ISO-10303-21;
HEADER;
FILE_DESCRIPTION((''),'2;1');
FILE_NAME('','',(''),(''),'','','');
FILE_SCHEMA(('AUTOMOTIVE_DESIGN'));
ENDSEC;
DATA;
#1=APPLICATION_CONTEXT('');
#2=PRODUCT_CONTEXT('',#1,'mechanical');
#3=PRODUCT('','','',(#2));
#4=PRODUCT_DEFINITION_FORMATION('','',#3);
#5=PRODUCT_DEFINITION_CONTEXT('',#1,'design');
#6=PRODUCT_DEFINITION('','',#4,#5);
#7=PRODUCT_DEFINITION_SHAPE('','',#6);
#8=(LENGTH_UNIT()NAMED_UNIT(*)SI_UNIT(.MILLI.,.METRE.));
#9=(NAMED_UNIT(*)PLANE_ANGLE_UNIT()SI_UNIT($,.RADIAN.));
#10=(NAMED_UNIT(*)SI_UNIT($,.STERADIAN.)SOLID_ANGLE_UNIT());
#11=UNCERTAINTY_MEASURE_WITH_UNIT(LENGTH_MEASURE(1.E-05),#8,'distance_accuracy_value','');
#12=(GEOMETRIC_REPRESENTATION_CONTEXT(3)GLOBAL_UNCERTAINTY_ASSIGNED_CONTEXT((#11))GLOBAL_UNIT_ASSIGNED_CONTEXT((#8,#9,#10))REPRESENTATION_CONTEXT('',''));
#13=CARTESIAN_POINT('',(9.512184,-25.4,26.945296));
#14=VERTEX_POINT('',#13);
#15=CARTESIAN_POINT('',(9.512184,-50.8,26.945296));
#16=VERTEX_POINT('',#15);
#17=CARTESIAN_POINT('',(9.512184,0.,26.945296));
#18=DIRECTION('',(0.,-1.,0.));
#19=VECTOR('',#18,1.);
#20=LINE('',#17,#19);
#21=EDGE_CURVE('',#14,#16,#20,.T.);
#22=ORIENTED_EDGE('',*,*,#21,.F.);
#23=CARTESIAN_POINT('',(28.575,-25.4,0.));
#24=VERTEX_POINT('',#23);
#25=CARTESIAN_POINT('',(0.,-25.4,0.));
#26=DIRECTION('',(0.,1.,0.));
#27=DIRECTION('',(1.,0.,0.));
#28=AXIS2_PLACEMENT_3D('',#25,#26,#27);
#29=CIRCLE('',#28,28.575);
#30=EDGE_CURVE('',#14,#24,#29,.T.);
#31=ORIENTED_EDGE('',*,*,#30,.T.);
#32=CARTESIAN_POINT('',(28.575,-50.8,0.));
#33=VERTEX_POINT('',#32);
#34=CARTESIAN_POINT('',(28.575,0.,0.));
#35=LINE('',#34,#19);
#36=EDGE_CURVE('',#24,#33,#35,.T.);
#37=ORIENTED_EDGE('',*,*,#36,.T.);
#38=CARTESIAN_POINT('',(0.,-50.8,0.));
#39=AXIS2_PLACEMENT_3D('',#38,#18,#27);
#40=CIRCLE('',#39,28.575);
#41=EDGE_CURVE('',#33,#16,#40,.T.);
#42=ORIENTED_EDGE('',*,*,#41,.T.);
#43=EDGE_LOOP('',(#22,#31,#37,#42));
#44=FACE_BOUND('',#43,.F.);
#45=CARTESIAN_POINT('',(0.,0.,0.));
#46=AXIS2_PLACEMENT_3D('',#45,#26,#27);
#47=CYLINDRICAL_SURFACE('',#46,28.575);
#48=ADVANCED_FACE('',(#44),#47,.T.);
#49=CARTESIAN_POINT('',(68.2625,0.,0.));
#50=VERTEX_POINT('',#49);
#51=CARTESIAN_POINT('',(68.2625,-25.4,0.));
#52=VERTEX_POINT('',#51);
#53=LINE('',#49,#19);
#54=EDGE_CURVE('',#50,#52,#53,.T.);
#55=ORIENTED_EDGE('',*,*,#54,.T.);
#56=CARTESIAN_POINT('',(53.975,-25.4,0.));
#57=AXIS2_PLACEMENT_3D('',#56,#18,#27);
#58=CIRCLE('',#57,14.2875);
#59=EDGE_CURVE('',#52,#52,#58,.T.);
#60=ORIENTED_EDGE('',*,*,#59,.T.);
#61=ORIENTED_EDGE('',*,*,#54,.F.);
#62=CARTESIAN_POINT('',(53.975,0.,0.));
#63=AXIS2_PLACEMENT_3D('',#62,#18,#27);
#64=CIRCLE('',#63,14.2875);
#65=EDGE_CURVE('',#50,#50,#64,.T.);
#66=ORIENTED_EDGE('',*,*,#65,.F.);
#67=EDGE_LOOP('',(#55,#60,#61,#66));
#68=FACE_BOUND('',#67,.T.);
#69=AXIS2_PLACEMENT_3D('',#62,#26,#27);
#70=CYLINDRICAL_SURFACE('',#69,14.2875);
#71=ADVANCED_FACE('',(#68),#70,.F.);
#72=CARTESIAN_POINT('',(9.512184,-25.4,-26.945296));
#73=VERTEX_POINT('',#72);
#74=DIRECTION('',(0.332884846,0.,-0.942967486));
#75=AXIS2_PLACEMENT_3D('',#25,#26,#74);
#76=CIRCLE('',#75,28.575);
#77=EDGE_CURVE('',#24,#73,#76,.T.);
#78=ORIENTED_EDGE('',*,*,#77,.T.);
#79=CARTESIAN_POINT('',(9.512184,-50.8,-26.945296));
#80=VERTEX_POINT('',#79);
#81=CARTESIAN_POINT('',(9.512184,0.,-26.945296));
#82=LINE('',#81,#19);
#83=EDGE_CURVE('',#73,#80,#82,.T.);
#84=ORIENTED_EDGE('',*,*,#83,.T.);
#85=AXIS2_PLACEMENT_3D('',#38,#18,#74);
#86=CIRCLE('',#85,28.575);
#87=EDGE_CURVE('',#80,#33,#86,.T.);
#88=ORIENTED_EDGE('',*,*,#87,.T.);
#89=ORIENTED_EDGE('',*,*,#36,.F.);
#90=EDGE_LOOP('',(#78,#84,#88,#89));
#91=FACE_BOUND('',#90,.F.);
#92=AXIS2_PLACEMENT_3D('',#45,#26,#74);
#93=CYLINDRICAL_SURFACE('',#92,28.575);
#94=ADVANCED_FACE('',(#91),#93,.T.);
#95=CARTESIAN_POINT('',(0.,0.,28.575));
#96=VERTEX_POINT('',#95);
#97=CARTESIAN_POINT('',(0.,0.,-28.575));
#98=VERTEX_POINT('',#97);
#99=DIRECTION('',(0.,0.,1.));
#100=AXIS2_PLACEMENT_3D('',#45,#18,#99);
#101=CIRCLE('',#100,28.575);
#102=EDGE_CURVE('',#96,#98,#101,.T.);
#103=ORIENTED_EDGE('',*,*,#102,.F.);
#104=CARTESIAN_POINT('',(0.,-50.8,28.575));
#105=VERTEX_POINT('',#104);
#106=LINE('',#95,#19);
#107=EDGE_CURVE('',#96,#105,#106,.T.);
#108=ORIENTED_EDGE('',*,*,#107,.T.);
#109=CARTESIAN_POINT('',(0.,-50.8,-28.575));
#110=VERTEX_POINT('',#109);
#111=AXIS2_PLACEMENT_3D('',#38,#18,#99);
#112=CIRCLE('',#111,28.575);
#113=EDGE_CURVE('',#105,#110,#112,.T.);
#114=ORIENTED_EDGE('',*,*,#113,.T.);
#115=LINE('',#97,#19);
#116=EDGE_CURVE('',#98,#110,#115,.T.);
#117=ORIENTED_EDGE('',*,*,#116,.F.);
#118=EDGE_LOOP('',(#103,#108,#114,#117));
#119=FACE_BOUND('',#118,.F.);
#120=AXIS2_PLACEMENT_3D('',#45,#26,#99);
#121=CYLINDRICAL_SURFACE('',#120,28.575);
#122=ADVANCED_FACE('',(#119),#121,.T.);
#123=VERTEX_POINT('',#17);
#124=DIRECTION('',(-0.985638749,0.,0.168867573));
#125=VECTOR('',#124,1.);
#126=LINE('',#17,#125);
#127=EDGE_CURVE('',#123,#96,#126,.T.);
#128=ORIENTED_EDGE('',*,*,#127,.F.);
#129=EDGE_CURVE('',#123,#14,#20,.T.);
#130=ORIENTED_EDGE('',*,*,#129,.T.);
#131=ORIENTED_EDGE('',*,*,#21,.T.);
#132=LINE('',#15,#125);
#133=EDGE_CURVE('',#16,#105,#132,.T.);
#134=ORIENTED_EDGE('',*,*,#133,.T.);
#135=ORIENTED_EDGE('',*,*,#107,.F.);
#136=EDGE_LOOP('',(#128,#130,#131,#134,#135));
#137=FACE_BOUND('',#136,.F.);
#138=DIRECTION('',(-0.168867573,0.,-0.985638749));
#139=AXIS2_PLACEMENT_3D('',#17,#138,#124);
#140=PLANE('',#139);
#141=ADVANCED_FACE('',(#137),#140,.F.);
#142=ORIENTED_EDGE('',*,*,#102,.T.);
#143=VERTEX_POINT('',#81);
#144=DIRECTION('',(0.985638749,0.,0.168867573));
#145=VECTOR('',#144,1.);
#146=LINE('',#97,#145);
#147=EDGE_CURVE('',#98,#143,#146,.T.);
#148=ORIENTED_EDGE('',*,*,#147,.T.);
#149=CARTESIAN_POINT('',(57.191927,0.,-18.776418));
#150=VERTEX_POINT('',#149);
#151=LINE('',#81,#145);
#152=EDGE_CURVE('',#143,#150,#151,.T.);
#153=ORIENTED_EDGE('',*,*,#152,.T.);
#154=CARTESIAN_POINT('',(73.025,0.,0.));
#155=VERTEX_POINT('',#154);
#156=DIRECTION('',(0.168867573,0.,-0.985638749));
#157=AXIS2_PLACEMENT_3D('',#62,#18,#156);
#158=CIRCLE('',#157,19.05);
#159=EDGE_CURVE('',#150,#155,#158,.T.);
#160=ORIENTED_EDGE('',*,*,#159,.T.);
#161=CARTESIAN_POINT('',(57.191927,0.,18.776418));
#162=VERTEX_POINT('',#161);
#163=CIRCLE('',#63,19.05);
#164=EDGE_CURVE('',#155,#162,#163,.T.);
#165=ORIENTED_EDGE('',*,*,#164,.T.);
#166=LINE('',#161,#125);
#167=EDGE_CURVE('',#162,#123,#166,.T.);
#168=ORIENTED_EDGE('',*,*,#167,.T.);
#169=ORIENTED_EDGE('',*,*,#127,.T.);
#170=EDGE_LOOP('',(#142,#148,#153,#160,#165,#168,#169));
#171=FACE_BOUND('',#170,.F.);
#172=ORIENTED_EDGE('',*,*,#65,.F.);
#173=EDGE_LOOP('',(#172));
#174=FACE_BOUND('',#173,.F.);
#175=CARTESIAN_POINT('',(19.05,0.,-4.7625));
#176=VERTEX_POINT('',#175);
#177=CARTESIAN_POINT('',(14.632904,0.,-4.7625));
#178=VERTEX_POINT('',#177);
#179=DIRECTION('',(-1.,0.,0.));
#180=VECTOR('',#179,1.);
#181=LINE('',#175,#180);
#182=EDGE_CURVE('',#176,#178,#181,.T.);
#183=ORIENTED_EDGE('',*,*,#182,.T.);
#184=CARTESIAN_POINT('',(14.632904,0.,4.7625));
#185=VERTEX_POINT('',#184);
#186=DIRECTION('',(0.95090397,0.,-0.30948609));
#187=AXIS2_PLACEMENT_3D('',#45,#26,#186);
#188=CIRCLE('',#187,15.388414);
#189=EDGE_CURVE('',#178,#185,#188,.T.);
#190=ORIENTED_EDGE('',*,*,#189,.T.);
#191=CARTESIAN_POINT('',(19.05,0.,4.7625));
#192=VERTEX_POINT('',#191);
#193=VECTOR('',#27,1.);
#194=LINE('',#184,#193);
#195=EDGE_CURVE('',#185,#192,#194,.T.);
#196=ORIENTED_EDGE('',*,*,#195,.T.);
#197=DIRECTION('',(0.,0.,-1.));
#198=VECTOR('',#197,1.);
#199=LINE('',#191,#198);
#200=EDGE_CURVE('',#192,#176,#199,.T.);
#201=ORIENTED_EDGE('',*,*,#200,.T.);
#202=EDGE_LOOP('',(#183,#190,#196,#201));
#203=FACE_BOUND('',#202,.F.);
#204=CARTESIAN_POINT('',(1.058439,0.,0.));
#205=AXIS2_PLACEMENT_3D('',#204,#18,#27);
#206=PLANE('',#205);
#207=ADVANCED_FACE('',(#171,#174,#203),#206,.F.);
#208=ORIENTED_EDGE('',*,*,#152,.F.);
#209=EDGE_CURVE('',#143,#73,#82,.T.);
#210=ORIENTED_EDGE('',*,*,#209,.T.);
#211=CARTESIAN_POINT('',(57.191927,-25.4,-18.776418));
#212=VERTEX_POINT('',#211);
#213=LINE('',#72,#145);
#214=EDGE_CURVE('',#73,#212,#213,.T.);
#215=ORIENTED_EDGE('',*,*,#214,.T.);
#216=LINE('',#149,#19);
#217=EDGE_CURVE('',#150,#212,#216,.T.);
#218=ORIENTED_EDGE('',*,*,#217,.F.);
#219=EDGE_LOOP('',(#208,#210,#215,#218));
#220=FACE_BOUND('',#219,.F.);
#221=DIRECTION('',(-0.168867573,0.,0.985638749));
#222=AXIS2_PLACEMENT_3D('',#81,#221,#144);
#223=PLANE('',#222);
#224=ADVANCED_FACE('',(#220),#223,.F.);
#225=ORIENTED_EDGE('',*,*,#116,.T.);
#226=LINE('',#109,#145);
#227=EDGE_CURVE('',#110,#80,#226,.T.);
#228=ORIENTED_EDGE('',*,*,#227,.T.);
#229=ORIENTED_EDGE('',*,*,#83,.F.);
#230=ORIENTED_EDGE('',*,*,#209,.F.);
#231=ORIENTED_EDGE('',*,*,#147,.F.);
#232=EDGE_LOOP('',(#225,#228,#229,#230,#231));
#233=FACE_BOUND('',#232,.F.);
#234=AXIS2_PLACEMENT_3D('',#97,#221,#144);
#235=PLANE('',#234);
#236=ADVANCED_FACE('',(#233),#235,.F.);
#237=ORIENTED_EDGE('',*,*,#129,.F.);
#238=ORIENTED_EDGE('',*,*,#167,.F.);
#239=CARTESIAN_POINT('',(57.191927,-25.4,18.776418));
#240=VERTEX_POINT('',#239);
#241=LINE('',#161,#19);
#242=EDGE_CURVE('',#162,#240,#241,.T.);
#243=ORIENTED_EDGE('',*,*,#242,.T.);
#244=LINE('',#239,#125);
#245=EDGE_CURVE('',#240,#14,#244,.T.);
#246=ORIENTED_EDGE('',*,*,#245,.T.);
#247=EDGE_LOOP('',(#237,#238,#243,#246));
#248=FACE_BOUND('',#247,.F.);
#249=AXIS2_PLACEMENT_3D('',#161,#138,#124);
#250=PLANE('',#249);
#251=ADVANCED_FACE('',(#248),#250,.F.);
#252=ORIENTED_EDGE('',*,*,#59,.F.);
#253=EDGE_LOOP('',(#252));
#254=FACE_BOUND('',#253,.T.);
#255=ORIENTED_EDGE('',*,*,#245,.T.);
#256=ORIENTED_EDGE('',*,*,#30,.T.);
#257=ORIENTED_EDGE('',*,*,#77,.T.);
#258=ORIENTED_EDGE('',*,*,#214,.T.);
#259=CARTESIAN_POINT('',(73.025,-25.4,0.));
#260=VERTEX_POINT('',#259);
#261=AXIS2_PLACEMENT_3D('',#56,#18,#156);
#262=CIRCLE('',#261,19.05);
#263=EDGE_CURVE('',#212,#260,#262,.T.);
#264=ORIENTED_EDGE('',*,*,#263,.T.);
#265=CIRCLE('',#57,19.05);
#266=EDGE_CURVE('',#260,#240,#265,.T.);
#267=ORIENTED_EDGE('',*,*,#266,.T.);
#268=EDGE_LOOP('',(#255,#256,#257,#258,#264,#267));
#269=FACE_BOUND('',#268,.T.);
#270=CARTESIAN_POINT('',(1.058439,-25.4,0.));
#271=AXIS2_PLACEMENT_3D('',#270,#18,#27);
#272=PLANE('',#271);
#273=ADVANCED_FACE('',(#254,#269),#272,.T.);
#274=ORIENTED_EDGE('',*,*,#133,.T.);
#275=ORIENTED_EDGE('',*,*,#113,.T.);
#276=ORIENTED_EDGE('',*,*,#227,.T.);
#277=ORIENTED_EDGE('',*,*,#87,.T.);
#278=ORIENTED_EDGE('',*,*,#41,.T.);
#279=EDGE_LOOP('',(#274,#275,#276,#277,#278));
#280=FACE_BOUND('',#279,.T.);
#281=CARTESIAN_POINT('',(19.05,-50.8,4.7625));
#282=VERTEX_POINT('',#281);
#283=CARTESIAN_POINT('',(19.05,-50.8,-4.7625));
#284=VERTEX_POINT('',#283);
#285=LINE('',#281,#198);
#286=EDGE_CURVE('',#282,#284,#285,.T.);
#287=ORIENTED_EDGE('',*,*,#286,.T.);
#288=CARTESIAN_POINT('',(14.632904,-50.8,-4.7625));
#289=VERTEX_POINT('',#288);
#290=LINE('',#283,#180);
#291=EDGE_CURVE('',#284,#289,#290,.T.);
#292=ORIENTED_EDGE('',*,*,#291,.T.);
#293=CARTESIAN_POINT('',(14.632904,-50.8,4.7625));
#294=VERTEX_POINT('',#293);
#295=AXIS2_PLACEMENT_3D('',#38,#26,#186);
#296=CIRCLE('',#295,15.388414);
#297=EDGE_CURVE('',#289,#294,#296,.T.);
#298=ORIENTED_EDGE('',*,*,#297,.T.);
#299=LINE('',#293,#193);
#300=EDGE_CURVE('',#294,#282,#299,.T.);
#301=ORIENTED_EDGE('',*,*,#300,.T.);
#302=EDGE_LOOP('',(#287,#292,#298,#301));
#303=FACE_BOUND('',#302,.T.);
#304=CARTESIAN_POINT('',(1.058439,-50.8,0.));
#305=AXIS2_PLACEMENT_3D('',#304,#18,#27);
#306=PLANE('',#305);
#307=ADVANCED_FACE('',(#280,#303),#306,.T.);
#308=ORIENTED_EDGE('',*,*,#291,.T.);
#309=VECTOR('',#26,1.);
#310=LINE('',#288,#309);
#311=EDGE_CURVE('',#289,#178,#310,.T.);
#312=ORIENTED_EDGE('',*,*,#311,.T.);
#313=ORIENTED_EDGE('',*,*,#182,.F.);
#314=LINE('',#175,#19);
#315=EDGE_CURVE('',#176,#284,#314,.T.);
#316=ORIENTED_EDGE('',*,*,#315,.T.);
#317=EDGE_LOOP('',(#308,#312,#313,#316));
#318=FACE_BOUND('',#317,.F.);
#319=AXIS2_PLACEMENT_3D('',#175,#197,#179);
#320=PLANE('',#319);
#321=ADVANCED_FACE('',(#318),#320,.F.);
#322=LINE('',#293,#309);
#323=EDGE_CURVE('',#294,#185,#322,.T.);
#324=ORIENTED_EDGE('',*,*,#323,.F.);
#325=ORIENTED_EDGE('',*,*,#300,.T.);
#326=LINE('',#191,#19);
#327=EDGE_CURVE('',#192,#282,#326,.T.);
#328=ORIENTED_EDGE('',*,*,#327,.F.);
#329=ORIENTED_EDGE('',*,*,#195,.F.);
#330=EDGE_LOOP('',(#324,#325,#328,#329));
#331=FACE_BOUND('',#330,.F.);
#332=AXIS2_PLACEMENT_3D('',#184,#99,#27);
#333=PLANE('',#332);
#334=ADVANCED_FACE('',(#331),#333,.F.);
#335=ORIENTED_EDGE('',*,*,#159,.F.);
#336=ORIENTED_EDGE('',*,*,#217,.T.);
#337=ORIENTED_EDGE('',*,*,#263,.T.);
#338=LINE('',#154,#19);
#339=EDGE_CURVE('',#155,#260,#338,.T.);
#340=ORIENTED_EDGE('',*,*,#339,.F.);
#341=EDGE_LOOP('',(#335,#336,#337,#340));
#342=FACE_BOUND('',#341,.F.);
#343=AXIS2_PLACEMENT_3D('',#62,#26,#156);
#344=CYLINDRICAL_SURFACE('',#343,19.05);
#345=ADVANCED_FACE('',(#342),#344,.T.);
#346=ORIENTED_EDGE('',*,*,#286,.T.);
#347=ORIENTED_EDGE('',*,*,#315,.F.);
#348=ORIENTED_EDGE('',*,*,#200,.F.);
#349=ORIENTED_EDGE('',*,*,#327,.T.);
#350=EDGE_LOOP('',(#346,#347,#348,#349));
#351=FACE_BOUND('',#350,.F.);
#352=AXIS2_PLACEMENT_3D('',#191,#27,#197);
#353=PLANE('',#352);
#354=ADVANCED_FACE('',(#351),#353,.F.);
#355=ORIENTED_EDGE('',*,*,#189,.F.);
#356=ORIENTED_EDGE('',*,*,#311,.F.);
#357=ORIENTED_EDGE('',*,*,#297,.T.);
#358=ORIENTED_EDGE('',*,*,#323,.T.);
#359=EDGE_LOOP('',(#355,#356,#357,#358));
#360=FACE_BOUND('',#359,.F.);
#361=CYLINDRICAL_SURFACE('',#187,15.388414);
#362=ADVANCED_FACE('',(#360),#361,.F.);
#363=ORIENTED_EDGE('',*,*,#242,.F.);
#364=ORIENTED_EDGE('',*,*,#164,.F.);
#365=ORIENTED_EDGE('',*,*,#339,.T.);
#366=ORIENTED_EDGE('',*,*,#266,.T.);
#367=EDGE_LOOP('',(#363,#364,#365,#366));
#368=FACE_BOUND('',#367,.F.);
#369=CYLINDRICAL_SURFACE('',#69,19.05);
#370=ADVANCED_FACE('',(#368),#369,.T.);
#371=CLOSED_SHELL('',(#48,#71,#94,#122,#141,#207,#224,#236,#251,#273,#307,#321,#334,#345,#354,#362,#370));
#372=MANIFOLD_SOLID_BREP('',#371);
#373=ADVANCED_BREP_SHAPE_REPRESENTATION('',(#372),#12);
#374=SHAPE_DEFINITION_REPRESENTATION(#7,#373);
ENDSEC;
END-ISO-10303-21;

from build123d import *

# Parameters (mm, degrees)
F0_R     = 14.2875
F1_DEPTH = 25.4
F2_DEPTH = 50.8


with BuildPart() as f1:
    # F0 (on Front) → F1 (new body)
    with BuildSketch(Plane.XZ):
        with BuildLine():
            Line((9.5121844836, 26.9452959039), (0, 28.575))
            ThreePointArc((0, 28.575), (-28.575, 0), (0, -28.575))
            Line((0, -28.575), (9.5121844836, -26.9452959039))
            ThreePointArc((9.5121844836, -26.9452959039), (23.3274655355, -16.5033322905), (28.575, 0))
            ThreePointArc((28.575, 0), (23.3274655355, 16.5033322905), (9.5121844836, 26.9452959039))
        make_face()
        with BuildLine():
            ThreePointArc((-14.6329037383, 4.7625), (0, 15.3884137605), (14.6329037383, 4.7625))
            Line((14.6329037383, 4.7625), (19.05, 4.7625))
            Line((19.05, 4.7625), (19.05, -4.7625))
            Line((19.05, -4.7625), (14.6329037383, -4.7625))
            ThreePointArc((14.6329037383, -4.7625), (0, -15.3884137605), (-14.6329037383, -4.7625))
            Line((-14.6329037383, -4.7625), (-19.05, -4.7625))
            Line((-19.05, -4.7625), (-19.05, 4.7625))
            Line((-19.05, 4.7625), (-14.6329037383, 4.7625))
        make_face(mode=Mode.SUBTRACT)
        with BuildLine():
            Line((57.1919272622, 18.7764181619), (9.5121844836, 26.9452959039))
            ThreePointArc((9.5121844836, 26.9452959039), (23.3274655355, 16.5033322905), (28.575, 0))
            ThreePointArc((28.575, 0), (23.3274655355, -16.5033322905), (9.5121844836, -26.9452959039))
            Line((9.5121844836, -26.9452959039), (57.1919272622, -18.7764181619))
            ThreePointArc((57.1919272622, -18.7764181619), (34.925, 0), (57.1919272622, 18.7764181619))
        make_face()
        with BuildLine():
            ThreePointArc((73.025, 0), (68.5383952831, 12.2804730295), (57.1919272622, 18.7764181619))
            ThreePointArc((57.1919272622, 18.7764181619), (34.925, 0), (57.1919272622, -18.7764181619))
            ThreePointArc((57.1919272622, -18.7764181619), (68.5383952831, -12.2804730295), (73.025, 0))
        make_face()
        with Locations((53.975, 0)):
            Circle(F0_R, mode=Mode.SUBTRACT)
        with BuildLine():
            ThreePointArc((-14.6329037383, -4.7625), (-15.3884137605, 0), (-14.6329037383, 4.7625))
            Line((-14.6329037383, 4.7625), (-19.05, 4.7625))
            Line((-19.05, 4.7625), (-19.05, -4.7625))
            Line((-19.05, -4.7625), (-14.6329037383, -4.7625))
        make_face()
    extrude(amount=F1_DEPTH)

    # F0 (on Front) → F2 (join)
    with BuildSketch(Plane.XZ):
        with BuildLine():
            Line((9.5121844836, 26.9452959039), (0, 28.575))
            ThreePointArc((0, 28.575), (-28.575, 0), (0, -28.575))
            Line((0, -28.575), (9.5121844836, -26.9452959039))
            ThreePointArc((9.5121844836, -26.9452959039), (23.3274655355, -16.5033322905), (28.575, 0))
            ThreePointArc((28.575, 0), (23.3274655355, 16.5033322905), (9.5121844836, 26.9452959039))
        make_face()
        with BuildLine():
            ThreePointArc((-14.6329037383, 4.7625), (0, 15.3884137605), (14.6329037383, 4.7625))
            Line((14.6329037383, 4.7625), (19.05, 4.7625))
            Line((19.05, 4.7625), (19.05, -4.7625))
            Line((19.05, -4.7625), (14.6329037383, -4.7625))
            ThreePointArc((14.6329037383, -4.7625), (0, -15.3884137605), (-14.6329037383, -4.7625))
            Line((-14.6329037383, -4.7625), (-19.05, -4.7625))
            Line((-19.05, -4.7625), (-19.05, 4.7625))
            Line((-19.05, 4.7625), (-14.6329037383, 4.7625))
        make_face(mode=Mode.SUBTRACT)
        with BuildLine():
            ThreePointArc((-14.6329037383, -4.7625), (-15.3884137605, 0), (-14.6329037383, 4.7625))
            Line((-14.6329037383, 4.7625), (-19.05, 4.7625))
            Line((-19.05, 4.7625), (-19.05, -4.7625))
            Line((-19.05, -4.7625), (-14.6329037383, -4.7625))
        make_face()
    extrude(amount=F2_DEPTH)


solid = f1.part
